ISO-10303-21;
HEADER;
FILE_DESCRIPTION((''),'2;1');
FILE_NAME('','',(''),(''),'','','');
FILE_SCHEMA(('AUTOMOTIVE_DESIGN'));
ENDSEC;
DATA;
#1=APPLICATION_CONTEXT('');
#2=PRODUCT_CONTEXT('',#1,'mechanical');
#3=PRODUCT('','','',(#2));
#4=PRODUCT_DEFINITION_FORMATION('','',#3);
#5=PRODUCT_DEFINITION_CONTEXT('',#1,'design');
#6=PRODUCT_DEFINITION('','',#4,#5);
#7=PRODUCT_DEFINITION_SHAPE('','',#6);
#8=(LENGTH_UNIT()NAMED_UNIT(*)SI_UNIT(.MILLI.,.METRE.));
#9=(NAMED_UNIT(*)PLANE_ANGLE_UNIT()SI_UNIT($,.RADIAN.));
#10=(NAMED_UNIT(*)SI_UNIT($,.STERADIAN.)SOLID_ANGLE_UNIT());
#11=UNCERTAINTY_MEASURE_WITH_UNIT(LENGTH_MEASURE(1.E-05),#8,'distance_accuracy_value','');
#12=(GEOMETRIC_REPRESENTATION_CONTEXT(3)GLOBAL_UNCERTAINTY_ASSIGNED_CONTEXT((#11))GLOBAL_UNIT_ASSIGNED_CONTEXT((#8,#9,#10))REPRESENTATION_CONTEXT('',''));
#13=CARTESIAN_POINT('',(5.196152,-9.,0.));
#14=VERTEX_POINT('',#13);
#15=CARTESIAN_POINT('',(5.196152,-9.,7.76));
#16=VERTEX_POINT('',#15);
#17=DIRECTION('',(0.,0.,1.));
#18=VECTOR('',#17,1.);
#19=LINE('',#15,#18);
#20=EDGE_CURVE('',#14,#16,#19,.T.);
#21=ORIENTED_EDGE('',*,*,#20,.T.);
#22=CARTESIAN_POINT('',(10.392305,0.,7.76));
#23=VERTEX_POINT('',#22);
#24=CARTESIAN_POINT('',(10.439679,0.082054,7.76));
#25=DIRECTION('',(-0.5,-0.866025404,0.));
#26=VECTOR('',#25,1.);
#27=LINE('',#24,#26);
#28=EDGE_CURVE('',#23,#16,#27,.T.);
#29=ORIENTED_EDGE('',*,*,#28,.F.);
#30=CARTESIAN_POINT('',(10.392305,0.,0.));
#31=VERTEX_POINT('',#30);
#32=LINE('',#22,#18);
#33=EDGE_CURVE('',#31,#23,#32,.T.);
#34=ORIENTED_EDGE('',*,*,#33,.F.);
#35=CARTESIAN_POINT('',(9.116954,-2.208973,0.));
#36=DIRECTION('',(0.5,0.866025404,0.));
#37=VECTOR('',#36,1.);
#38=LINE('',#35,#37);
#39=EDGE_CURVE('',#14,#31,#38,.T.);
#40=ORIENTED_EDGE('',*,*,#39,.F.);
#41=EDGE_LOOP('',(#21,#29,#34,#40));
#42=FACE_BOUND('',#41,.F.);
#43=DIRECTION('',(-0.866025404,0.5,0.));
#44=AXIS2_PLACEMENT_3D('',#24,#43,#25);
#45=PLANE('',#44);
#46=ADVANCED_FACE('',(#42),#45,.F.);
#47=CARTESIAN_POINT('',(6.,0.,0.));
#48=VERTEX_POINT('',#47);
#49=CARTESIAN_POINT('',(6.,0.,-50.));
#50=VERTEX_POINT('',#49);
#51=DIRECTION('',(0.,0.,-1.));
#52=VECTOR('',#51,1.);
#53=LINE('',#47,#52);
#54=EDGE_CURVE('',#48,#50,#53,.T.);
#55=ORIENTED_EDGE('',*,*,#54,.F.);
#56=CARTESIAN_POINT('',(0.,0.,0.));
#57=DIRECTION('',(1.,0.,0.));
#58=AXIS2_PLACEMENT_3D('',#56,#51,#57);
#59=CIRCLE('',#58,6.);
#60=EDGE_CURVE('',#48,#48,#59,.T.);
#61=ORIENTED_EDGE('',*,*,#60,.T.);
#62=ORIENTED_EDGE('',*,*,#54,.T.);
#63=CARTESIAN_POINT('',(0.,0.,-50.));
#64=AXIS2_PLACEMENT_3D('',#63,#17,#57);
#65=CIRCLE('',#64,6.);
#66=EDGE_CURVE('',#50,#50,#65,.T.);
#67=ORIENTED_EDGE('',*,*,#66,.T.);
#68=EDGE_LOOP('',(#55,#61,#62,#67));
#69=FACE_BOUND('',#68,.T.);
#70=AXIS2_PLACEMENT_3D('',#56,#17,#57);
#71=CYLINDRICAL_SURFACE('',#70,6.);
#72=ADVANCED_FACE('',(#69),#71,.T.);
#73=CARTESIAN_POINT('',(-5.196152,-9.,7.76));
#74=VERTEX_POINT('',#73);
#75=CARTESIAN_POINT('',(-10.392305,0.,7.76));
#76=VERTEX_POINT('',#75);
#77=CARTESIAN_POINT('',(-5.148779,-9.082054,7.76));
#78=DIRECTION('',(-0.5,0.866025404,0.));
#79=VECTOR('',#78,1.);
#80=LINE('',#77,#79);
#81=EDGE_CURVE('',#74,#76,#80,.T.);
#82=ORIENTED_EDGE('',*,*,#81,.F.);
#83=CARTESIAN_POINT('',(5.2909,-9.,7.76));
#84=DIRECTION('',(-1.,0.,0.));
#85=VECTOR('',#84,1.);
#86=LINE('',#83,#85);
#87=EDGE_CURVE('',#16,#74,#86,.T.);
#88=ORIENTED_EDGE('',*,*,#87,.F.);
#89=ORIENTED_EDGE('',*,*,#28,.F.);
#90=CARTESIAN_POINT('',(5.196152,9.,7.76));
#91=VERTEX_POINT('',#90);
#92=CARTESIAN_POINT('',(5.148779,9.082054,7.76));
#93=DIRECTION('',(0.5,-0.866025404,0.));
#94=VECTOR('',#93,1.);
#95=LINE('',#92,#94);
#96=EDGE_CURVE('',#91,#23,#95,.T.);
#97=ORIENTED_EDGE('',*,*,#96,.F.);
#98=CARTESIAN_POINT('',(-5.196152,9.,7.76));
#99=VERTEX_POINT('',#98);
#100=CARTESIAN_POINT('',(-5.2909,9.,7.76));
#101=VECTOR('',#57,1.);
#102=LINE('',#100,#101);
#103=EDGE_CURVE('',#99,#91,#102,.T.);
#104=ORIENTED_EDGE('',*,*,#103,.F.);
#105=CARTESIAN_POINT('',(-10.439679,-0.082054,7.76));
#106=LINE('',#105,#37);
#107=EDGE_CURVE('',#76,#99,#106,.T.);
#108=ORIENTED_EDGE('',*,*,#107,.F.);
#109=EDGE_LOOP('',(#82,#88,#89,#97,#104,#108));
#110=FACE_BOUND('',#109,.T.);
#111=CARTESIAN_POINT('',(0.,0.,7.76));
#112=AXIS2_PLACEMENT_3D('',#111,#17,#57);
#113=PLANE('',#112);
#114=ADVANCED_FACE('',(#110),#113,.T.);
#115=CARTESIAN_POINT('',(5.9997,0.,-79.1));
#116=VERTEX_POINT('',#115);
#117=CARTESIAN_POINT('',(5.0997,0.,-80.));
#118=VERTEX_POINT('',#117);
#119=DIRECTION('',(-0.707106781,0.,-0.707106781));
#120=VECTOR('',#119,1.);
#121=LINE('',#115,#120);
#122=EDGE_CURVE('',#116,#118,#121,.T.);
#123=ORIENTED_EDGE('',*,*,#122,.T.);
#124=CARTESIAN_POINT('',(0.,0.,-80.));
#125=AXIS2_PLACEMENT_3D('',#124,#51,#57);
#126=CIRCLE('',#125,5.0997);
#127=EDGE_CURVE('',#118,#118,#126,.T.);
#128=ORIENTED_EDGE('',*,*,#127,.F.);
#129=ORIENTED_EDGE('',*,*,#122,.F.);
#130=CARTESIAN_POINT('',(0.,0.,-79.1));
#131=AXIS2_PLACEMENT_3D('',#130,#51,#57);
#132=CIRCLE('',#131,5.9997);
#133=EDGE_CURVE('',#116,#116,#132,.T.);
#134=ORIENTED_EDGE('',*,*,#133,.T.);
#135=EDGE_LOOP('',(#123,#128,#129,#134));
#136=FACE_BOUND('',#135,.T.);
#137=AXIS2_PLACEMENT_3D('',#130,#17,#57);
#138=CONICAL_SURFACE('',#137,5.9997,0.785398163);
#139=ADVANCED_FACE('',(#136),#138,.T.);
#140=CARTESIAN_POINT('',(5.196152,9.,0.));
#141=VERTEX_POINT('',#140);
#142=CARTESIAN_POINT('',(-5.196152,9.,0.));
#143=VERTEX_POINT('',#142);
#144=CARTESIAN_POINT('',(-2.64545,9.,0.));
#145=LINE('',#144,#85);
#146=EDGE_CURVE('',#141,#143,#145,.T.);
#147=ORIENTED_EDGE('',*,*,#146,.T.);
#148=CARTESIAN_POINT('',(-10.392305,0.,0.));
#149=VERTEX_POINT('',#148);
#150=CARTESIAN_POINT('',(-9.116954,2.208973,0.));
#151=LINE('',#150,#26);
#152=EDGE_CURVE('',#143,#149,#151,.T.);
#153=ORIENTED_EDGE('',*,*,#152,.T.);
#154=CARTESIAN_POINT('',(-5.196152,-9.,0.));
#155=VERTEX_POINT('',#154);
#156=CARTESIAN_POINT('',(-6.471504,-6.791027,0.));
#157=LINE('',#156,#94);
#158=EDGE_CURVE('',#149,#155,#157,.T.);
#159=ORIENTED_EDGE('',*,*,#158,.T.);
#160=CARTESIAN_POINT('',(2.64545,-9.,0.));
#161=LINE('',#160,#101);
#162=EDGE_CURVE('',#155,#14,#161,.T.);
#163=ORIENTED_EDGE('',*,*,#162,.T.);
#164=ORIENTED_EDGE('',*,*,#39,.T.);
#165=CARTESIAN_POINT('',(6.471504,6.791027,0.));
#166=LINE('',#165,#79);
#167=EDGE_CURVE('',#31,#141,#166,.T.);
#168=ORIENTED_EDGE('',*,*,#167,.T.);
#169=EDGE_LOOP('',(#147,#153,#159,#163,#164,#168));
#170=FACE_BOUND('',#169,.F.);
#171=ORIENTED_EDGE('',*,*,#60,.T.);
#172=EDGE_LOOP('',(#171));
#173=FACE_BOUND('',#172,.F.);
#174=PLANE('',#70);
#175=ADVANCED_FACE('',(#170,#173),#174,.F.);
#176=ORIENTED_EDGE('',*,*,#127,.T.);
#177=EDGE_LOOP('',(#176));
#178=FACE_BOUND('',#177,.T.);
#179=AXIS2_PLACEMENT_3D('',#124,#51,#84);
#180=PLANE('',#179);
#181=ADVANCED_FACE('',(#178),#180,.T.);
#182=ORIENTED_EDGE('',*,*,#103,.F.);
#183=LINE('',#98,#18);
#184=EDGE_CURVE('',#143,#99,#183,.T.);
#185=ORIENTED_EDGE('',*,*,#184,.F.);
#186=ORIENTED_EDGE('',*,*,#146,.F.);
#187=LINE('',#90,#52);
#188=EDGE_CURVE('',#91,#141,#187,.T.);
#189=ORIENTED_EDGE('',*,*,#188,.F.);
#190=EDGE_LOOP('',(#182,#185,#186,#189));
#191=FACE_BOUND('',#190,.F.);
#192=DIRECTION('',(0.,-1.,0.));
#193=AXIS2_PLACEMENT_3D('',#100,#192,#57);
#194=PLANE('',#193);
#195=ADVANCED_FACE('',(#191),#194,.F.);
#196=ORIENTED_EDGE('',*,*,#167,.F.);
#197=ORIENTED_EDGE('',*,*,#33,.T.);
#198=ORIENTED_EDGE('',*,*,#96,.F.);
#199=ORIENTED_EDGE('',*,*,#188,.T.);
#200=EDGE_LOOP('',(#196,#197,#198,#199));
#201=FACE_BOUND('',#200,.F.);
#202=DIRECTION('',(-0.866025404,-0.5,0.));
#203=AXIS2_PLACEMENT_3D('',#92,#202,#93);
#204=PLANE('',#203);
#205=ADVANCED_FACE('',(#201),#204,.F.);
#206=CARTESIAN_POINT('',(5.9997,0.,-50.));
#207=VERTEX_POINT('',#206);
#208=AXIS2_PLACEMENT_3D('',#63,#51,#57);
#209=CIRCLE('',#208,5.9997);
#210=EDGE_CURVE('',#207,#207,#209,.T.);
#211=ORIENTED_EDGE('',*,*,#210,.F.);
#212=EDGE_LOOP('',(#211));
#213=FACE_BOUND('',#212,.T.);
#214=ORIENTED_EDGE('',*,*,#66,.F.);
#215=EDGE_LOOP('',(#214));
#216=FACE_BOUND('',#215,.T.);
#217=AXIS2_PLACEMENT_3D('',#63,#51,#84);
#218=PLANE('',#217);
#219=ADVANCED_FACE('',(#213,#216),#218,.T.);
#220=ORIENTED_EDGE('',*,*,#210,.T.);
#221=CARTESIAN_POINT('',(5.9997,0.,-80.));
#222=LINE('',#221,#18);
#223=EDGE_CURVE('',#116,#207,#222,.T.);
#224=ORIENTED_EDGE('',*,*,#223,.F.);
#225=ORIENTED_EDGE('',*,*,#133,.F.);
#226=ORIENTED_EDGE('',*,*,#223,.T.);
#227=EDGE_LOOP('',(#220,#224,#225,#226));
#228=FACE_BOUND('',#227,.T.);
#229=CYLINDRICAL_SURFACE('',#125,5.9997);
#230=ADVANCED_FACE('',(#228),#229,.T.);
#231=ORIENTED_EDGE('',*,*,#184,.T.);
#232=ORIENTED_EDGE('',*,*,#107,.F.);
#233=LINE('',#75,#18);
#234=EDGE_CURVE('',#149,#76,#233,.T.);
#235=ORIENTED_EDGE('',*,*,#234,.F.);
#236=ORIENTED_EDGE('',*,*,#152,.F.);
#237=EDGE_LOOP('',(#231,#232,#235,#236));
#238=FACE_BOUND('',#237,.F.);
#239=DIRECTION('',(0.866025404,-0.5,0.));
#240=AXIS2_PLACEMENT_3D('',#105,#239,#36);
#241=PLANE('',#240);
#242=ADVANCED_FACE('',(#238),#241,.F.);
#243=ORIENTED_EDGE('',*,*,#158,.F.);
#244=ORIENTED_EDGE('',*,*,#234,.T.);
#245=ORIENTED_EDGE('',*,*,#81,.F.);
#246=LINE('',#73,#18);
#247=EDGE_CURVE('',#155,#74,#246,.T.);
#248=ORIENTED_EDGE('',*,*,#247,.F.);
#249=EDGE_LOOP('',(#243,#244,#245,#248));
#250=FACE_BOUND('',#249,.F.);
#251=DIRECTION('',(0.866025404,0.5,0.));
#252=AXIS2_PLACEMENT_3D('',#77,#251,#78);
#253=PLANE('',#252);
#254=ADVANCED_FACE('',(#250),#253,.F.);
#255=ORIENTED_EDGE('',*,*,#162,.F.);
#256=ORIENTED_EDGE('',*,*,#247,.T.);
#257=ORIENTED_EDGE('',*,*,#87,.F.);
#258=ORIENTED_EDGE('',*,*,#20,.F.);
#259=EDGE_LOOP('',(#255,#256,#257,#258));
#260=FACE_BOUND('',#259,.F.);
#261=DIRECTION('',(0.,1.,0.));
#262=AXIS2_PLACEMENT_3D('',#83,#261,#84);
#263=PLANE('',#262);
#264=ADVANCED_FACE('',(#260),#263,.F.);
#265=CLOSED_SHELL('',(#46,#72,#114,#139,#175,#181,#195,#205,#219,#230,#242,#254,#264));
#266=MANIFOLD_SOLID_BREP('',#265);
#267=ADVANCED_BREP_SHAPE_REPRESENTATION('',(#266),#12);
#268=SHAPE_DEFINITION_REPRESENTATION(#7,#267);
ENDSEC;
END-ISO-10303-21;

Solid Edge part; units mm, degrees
sketch "Sketch1" plane through (0, 0, 0) normal (0, 0, 1) x (1, 0, 0)
  circle A0 centre (0, 0) radius 10.44
  dimension "D1" = 20.88
extrude "Protrusion1" add sketch "Sketch1" along normal blind 7.76
sketch "Sketch2" plane through (0, 0, 0) normal (0, 0, -1) x (1, 0, 0)
  circle A0 centre (0, 0) radius 6
extrude "Protrusion2" add sketch "Sketch2" along normal blind 80
sketch "Sketch3" plane through (0, 0, -80) normal (0, 0, -1) x (1, 0, 0)
  circle A0 centre (0, 0) radius 5.9997
extrude "Cutout1" cut sketch "Sketch3" against normal blind 30 flip side to cut
chamfer "Chamfer_1" distance 0.9 angle 45 1 edges at (-5.9997, 0, -80)
sketch "Sketch4" plane through (0, 0, 7.76) normal (0, 0, 1) x (1, 0, 0)
  line L0 (-5.2909, 9) -> (5.2909, 9)
  dimension "D1" = 18
extrude "Cutout2" cut sketch "Sketch4" against normal up to next material side at (0, 9.05, 7.76)
pattern_circular "Pattern1" count 6 over 360 about axis through (0, 0, 7.76) along (0, 0, 1) of "Cutout2"
properties part number "24104684"
